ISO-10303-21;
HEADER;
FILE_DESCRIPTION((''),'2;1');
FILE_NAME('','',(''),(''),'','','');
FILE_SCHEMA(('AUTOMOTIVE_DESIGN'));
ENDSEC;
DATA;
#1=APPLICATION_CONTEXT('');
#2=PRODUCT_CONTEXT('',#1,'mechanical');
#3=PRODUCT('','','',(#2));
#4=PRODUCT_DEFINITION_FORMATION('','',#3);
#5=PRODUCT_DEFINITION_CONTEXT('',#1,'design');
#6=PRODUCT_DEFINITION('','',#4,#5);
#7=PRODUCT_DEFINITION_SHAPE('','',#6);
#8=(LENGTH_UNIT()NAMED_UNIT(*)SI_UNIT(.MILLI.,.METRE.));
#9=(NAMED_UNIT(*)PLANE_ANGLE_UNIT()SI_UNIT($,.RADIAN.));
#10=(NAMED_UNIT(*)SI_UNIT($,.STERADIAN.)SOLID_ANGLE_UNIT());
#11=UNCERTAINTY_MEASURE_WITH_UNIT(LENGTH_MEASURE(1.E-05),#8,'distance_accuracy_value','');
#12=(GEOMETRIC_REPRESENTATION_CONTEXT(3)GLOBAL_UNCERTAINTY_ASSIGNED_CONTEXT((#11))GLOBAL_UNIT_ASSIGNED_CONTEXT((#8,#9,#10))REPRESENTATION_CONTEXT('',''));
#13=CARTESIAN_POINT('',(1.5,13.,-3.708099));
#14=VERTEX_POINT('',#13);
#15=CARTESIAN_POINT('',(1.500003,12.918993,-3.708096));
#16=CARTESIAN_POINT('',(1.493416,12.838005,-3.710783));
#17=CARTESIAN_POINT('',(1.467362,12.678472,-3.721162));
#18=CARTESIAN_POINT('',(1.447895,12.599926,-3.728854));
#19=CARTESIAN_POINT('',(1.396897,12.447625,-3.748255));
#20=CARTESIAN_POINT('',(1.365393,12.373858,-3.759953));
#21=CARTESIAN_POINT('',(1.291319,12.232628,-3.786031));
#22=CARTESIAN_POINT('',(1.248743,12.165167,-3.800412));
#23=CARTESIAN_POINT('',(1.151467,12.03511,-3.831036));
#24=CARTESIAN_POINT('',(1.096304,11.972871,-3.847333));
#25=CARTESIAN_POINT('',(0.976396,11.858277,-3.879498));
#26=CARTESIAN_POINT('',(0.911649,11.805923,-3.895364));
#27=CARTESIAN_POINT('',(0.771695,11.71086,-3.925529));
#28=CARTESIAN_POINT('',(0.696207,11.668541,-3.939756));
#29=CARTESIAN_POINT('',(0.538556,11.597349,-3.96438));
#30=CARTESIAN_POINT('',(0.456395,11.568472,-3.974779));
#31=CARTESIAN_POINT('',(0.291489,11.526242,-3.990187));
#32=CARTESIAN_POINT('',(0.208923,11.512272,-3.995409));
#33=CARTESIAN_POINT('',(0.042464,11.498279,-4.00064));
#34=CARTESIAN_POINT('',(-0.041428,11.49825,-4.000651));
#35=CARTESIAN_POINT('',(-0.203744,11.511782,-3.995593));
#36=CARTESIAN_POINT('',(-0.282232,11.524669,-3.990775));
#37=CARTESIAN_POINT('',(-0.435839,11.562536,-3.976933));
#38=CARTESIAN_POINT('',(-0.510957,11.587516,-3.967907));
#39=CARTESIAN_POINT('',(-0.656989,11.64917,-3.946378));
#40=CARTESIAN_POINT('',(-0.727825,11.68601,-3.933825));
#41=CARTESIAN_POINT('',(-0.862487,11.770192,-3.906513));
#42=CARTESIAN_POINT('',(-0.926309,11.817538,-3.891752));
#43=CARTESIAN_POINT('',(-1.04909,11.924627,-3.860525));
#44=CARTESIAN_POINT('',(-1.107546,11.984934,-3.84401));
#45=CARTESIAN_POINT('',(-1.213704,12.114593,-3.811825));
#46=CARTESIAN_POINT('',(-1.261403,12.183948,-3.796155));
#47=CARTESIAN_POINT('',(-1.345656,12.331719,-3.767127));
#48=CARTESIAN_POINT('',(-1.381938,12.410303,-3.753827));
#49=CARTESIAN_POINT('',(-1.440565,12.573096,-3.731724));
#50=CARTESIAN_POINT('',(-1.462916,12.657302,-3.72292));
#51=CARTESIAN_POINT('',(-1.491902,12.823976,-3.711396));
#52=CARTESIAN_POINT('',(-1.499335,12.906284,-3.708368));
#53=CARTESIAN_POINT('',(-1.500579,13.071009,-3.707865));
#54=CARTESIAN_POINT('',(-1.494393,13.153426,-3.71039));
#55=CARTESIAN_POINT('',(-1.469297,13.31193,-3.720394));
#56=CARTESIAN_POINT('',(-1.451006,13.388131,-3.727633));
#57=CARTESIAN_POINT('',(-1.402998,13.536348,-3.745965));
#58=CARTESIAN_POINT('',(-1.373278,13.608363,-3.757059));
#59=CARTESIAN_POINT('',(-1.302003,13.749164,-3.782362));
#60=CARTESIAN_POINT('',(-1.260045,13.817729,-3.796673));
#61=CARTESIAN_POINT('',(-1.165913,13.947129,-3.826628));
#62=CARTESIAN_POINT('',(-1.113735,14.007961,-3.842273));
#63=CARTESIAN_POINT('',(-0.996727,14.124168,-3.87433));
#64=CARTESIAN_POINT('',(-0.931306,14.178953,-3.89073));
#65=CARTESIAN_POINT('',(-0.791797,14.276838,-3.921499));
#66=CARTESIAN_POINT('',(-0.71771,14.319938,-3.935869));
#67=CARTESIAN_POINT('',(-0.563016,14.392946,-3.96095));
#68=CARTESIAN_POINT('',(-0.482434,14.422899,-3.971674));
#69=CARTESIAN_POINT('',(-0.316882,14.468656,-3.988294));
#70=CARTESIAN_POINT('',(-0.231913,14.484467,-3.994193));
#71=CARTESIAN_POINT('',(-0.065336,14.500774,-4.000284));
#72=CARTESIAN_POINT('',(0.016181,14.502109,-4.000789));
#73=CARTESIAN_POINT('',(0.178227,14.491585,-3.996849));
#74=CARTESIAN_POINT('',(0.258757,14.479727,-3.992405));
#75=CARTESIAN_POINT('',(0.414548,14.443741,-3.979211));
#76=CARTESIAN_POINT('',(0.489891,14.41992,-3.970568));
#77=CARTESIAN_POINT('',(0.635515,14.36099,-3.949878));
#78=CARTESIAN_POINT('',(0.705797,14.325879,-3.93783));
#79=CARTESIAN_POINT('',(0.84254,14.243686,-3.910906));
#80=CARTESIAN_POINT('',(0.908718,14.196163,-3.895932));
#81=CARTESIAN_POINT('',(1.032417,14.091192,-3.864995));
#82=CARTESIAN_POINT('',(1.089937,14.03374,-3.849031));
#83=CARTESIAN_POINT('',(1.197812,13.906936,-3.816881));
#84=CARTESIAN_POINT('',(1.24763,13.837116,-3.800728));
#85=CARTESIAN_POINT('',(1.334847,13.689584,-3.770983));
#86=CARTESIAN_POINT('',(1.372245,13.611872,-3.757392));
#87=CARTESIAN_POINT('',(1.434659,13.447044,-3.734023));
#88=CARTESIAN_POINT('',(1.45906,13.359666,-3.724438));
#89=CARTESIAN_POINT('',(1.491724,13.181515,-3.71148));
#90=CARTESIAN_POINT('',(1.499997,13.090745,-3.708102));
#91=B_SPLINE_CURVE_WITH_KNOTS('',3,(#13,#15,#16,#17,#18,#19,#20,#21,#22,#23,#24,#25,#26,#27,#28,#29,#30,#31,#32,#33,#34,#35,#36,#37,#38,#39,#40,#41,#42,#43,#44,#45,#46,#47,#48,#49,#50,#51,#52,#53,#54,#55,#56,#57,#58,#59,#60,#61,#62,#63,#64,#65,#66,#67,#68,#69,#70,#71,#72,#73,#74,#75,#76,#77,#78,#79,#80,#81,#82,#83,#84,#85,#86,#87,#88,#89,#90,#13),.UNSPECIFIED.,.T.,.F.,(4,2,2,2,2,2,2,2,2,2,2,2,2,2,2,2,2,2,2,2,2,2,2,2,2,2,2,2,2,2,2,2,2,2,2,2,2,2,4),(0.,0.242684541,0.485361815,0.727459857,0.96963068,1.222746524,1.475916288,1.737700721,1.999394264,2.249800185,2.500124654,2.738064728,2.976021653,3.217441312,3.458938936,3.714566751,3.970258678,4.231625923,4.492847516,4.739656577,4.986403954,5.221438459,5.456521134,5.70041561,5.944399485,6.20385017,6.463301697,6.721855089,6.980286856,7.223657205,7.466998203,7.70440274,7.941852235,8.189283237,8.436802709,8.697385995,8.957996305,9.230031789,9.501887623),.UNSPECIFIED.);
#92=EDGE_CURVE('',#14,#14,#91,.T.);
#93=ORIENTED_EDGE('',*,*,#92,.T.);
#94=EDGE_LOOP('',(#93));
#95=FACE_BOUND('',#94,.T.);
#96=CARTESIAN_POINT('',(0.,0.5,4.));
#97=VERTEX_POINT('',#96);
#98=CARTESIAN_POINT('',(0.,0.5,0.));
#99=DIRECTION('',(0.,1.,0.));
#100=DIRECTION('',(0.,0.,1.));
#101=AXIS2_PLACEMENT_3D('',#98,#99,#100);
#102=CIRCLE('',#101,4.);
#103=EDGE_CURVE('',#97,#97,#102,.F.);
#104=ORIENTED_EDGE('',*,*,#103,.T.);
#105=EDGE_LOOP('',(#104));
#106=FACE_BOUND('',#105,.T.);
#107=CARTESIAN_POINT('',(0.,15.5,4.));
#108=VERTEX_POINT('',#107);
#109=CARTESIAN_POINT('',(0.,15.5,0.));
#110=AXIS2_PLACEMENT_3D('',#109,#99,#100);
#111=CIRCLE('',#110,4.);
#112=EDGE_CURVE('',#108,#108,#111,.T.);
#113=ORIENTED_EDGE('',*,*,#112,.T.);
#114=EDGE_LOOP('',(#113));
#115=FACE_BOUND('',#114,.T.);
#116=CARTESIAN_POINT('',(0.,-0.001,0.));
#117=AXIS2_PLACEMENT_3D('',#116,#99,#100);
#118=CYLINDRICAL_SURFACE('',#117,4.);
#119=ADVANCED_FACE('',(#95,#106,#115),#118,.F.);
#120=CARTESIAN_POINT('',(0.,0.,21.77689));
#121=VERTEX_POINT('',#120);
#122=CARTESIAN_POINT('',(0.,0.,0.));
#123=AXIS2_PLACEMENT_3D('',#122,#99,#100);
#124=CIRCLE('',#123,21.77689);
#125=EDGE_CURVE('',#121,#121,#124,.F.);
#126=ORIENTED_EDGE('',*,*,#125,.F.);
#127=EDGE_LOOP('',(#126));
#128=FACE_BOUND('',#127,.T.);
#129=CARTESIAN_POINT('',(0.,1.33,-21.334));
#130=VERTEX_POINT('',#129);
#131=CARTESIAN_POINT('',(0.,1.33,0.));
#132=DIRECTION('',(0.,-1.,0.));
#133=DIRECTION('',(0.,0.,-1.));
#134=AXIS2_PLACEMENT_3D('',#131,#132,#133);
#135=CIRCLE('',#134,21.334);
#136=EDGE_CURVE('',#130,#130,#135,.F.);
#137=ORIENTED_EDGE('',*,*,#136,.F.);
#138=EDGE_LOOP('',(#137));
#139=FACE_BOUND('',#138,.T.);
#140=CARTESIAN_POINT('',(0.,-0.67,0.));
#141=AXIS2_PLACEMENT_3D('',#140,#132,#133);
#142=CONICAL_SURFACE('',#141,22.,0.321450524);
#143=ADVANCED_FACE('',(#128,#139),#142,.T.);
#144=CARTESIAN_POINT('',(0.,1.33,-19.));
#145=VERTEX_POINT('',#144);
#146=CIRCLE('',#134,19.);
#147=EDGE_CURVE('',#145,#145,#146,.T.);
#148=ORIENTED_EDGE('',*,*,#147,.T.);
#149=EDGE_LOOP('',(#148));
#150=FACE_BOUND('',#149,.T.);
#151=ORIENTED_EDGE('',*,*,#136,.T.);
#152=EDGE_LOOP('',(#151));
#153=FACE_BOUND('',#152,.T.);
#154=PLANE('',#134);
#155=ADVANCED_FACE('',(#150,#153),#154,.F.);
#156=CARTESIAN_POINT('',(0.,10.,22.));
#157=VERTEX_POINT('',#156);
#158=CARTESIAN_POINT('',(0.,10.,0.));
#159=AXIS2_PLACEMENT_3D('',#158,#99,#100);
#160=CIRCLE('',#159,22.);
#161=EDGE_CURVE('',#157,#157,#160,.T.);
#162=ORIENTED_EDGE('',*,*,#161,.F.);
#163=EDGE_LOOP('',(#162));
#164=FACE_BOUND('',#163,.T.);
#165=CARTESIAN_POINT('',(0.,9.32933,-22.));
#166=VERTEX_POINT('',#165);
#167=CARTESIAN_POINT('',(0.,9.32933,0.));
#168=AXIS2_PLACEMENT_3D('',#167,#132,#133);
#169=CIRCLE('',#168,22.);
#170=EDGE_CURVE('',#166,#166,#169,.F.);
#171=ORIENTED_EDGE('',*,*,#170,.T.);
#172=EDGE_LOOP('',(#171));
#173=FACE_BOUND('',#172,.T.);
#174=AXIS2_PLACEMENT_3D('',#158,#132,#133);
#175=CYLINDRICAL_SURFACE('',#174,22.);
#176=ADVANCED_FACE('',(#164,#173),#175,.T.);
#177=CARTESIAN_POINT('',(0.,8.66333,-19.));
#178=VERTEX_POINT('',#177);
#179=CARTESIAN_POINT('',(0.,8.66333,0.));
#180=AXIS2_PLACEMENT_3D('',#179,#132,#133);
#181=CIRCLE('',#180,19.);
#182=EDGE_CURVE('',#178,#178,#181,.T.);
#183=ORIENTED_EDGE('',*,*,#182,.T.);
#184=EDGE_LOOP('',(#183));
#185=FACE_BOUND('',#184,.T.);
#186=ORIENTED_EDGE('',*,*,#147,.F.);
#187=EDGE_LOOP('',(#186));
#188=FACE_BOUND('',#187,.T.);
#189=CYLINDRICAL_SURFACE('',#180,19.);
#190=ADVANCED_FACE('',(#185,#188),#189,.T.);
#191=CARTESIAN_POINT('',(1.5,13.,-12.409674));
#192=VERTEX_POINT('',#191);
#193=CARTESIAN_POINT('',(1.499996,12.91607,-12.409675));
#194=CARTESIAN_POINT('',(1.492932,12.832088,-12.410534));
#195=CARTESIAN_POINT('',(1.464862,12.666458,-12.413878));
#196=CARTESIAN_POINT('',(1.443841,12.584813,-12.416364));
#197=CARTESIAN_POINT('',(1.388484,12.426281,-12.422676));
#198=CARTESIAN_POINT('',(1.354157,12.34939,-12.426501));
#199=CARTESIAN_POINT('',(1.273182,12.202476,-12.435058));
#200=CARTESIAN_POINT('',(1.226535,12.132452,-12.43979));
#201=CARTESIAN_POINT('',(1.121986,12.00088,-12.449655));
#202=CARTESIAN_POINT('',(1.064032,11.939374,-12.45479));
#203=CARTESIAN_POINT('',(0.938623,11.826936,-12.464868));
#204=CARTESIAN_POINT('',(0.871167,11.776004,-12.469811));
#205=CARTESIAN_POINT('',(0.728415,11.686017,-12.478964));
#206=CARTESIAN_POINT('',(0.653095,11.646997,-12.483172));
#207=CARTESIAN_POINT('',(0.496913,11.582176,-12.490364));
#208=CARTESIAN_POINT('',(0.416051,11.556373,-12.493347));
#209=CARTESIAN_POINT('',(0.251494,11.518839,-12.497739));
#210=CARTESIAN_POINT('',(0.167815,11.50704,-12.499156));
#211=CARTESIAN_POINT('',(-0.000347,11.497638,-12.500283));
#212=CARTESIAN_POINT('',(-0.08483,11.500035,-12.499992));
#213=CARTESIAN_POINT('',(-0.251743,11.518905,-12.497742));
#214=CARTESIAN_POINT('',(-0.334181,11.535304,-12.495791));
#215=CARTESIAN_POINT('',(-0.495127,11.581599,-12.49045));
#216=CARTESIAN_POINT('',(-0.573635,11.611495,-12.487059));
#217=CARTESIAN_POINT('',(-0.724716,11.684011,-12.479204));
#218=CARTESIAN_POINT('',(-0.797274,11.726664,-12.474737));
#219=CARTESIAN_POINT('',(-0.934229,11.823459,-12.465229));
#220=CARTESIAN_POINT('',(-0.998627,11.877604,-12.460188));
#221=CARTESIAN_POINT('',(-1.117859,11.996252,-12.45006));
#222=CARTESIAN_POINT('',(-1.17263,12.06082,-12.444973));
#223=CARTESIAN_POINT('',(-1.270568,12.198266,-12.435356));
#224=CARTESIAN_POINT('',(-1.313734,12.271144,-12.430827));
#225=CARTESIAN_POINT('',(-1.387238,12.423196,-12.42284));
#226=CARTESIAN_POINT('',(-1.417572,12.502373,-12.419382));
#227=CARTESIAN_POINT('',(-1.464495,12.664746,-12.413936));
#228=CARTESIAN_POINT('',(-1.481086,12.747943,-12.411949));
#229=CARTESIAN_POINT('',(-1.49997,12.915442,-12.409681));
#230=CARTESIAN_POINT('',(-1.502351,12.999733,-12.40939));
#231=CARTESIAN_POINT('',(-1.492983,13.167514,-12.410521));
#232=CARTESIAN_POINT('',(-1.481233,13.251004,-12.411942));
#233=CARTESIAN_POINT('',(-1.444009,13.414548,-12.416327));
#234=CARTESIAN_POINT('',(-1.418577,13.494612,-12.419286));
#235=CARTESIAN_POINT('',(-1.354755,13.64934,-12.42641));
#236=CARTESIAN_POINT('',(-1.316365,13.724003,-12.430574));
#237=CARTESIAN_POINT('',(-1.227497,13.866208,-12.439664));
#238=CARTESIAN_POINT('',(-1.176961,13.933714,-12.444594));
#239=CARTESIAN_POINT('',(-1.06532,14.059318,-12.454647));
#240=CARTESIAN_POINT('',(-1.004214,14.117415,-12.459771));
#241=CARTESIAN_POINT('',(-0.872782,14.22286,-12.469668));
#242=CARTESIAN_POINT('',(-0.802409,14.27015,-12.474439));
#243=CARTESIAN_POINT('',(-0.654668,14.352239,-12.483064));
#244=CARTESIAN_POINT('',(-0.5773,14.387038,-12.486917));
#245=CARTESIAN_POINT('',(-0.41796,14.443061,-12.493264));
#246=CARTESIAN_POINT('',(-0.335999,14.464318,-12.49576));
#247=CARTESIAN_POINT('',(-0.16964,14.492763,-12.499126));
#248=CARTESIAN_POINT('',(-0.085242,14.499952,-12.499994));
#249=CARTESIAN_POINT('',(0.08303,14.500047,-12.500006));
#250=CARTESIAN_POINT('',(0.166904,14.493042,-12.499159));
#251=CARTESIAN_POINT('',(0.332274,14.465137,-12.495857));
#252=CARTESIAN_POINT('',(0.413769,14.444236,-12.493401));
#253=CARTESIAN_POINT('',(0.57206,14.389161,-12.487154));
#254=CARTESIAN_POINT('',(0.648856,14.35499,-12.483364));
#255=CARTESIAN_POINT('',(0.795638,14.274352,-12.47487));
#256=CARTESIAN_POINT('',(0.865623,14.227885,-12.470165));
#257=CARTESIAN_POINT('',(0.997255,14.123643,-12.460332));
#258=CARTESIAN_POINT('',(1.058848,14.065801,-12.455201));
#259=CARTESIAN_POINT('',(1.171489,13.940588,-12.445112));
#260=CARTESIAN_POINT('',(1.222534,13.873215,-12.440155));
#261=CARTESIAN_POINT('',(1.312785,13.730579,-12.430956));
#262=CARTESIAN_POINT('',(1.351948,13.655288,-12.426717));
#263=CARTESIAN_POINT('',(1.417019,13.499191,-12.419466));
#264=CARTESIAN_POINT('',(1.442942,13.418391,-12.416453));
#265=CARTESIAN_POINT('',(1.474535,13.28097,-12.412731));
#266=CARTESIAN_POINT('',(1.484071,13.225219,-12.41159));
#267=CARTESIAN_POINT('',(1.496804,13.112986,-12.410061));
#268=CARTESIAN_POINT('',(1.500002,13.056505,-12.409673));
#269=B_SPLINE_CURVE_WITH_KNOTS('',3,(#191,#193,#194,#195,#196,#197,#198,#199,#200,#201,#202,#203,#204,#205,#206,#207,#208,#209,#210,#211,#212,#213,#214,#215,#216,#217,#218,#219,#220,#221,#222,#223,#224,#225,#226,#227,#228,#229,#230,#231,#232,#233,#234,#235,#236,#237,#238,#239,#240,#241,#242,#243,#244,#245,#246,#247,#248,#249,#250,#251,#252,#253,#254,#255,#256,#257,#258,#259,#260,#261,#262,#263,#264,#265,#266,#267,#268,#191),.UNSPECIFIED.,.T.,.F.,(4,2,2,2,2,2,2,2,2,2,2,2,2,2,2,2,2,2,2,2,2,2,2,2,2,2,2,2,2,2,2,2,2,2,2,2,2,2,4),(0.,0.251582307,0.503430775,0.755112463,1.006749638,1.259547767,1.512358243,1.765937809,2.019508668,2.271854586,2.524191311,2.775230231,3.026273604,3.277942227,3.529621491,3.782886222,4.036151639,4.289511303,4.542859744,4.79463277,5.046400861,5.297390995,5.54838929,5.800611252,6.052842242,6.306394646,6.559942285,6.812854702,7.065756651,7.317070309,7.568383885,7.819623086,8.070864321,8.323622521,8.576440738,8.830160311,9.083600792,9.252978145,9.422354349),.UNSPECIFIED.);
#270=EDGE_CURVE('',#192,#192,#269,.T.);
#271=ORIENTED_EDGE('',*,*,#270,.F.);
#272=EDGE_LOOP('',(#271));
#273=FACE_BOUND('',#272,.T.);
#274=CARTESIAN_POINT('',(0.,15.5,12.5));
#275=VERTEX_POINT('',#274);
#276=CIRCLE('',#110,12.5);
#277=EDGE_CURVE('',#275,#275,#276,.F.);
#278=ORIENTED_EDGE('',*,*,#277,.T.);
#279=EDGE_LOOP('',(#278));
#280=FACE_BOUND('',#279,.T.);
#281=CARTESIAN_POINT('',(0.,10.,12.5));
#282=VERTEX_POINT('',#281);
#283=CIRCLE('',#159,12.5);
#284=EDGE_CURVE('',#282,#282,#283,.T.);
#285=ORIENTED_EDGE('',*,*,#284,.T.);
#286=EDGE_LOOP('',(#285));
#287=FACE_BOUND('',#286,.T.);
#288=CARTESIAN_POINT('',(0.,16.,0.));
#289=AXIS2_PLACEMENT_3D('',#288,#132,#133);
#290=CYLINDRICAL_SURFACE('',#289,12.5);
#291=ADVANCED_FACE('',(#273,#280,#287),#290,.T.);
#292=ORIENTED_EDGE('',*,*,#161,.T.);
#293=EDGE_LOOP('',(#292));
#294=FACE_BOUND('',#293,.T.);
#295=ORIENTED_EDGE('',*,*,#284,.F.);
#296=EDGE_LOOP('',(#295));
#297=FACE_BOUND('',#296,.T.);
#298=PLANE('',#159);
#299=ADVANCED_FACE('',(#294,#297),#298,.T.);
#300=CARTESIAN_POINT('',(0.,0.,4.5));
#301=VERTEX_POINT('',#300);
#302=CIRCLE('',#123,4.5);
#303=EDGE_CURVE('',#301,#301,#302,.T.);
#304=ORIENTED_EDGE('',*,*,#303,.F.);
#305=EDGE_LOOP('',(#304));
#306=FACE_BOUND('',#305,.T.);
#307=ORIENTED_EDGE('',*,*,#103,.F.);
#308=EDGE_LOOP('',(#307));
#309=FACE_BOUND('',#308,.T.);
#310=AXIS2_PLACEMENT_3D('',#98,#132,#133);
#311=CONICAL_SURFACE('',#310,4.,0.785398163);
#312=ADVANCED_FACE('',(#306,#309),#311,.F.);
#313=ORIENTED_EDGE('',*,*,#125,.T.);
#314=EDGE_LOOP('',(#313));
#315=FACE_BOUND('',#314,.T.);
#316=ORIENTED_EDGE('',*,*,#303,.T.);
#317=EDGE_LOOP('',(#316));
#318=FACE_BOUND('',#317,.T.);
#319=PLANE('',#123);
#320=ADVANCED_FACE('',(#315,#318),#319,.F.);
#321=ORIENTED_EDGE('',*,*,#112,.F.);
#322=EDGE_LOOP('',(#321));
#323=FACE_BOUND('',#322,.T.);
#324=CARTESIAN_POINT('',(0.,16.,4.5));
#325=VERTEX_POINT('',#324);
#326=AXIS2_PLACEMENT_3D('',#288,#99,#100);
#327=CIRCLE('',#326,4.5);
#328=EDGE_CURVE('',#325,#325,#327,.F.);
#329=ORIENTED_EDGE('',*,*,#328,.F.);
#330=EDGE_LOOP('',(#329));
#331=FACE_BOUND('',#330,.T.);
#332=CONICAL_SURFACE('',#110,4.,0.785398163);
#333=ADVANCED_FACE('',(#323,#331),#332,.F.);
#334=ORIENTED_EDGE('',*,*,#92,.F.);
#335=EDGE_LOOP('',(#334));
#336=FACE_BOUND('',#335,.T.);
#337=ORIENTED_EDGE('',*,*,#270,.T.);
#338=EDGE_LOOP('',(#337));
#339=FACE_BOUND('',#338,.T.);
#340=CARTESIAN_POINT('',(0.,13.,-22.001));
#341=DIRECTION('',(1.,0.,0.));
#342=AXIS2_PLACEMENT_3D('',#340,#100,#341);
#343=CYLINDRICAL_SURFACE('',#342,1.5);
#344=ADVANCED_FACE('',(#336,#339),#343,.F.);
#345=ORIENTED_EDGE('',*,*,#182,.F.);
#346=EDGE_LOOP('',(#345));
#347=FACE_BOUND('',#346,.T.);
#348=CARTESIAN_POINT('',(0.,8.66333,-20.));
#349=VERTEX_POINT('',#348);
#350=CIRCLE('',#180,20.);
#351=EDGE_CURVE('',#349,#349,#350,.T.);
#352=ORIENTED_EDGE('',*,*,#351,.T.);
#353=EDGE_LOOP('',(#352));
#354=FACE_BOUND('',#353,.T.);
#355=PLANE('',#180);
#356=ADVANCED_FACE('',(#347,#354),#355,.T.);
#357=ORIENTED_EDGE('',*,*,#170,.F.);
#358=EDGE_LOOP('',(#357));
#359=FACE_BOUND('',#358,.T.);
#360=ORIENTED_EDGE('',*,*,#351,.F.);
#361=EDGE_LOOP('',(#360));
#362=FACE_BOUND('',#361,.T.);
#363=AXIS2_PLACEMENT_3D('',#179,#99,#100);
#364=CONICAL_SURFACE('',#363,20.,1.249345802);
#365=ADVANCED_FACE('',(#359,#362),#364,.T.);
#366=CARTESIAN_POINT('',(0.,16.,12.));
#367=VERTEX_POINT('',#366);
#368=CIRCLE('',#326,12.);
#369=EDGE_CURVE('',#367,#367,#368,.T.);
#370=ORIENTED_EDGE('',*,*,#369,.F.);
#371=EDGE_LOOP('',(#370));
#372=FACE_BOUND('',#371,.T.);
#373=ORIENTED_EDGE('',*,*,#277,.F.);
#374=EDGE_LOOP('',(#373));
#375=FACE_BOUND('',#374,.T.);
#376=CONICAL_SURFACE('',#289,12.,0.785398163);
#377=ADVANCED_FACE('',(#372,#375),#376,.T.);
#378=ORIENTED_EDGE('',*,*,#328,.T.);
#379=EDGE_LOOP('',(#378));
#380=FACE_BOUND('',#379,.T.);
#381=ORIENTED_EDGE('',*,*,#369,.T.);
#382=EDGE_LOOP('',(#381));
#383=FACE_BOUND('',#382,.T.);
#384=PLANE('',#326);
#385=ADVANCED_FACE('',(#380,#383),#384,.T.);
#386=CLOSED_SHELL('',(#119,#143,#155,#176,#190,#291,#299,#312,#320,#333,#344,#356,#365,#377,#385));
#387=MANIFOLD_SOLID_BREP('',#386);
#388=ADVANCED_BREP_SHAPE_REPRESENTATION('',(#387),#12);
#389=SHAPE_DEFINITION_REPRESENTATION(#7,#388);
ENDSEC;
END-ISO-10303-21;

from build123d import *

# Parameters (mm, degrees)
SKETCH1_R               = 22
BOSS_EXTRUDE1_DEPTH     = 10
SKETCH2_R               = 12.5
BOSS_EXTRUDE2_DEPTH     = 6
CUT_EXTRUDE1_REACH      = 36.986
CUT_EXTRUDE1_END_RADIUS = 12.5
SKETCH3_R               = 1.5
CUT_EXTRUDE2_REACH      = 36.986
SKETCH4_R               = 4
CUT_EXTRUDE3_START      = -1.33
SKETCH5_R               = 22
SKETCH5_R_2             = 19
CUT_EXTRUDE3_DEPTH      = 7.33333
CHAMFER1_SIZE           = 2
CHAMFER1_SIZE_2         = 0.666
CHAMFER2_SIZE           = 0.5


with BuildPart() as part:
    # Sketch1 → Boss-Extrude1 (new body)
    with BuildSketch(Plane(origin=(0, 0, 0), x_dir=(1, 0, 0), z_dir=(0, 1, 0))):
        with Locations(Location((0, 0, 0), (0, 0, 270))):
            Circle(SKETCH1_R)
    extrude(amount=BOSS_EXTRUDE1_DEPTH)

    # Sketch2 → Boss-Extrude2 (add)
    with BuildSketch(Plane(origin=(0, 10, 0), x_dir=(1, 0, 0), z_dir=(0, 1, 0))):
        with Locations(Location((0, 0, 0), (0, 0, 270))):
            Circle(SKETCH2_R)
    extrude(amount=BOSS_EXTRUDE2_DEPTH)

    # Cut-Extrude1: up to this cylinder (the profile starts inside it)
    cut_extrude1_end = Plane(origin=(0, 13, 0), z_dir=(0, -1, 0)) * Cylinder(CUT_EXTRUDE1_END_RADIUS, 99.972, mode=Mode.PRIVATE)
    # Sketch3 → Cut-Extrude1 (cut, up to the surface)
    with BuildSketch(Plane.XY, mode=Mode.PRIVATE) as cut_extrude1_sk1:
        with Locations((0, 13)):
            Circle(SKETCH3_R)
    cut_extrude1_tool1 = extrude(cut_extrude1_sk1.sketch, amount=-CUT_EXTRUDE1_REACH, mode=Mode.PRIVATE) & cut_extrude1_end
    add(cut_extrude1_tool1.solids().sort_by_distance((0, 13, 0))[0], mode=Mode.SUBTRACT)

    # Sketch4 → Cut-Extrude2 (cut, up to next)
    with BuildSketch(Plane(origin=(0, 16, 0), x_dir=(1, 0, 0), z_dir=(0, 1, 0)), mode=Mode.PRIVATE) as cut_extrude2_sk1:
        with Locations(Location((0, 0, 0), (0, 0, 270))):
            Circle(SKETCH4_R)
    cut_extrude2_tool1 = extrude(cut_extrude2_sk1.sketch, amount=-CUT_EXTRUDE2_REACH, mode=Mode.PRIVATE) & part.part
    add(cut_extrude2_tool1.solids().sort_by_distance((0, 16, 0))[0], mode=Mode.SUBTRACT)

    # Sketch5 → Cut-Extrude3 (cut)
    with BuildSketch(Plane.XZ.offset(CUT_EXTRUDE3_START)):
        with Locations(Location((0, 0, 0), (0, 0, 270))):
            Circle(SKETCH5_R)
        with Locations(Location((0, 0, 0), (0, 0, 270))):
            Circle(SKETCH5_R_2, mode=Mode.SUBTRACT)
    extrude(amount=-CUT_EXTRUDE3_DEPTH, mode=Mode.SUBTRACT)

    # Chamfer1
    # the kernel refuses this chamfer: 2, 0.666 mm, written as the material it takes off along each edge
    with BuildSketch(Plane(origin=(0, 1.33, 0), x_dir=(0, 0, 1), z_dir=(1, 0, 0))) as chamfer1_piece_1:
        Polygon((22, CHAMFER1_SIZE), (22 - CHAMFER1_SIZE_2, 0), (22, 0), align=None)
    revolve(axis=Axis((0, 1.33, 0), (0, -1, 0)), mode=Mode.SUBTRACT)
    with BuildSketch(Plane(origin=(0, 8.66333, 0), x_dir=(0, 0, 1), z_dir=(1, 0, 0))) as chamfer1_piece_2:
        Polygon((22 - CHAMFER1_SIZE, 0), (22, -CHAMFER1_SIZE_2), (22, 0), align=None)
    revolve(axis=Axis((0, 8.66333, 0), (0, -1, 0)), mode=Mode.SUBTRACT)

    # Chamfer2
    chamfer2_edges = [part.edges().sort_by_distance(p)[0] for p in [
        (0, 16, -4),
        (0, 0, -4),
        (0, 16, -12.5),
    ]]
    chamfer(chamfer2_edges, length=CHAMFER2_SIZE)


solid = part.part
